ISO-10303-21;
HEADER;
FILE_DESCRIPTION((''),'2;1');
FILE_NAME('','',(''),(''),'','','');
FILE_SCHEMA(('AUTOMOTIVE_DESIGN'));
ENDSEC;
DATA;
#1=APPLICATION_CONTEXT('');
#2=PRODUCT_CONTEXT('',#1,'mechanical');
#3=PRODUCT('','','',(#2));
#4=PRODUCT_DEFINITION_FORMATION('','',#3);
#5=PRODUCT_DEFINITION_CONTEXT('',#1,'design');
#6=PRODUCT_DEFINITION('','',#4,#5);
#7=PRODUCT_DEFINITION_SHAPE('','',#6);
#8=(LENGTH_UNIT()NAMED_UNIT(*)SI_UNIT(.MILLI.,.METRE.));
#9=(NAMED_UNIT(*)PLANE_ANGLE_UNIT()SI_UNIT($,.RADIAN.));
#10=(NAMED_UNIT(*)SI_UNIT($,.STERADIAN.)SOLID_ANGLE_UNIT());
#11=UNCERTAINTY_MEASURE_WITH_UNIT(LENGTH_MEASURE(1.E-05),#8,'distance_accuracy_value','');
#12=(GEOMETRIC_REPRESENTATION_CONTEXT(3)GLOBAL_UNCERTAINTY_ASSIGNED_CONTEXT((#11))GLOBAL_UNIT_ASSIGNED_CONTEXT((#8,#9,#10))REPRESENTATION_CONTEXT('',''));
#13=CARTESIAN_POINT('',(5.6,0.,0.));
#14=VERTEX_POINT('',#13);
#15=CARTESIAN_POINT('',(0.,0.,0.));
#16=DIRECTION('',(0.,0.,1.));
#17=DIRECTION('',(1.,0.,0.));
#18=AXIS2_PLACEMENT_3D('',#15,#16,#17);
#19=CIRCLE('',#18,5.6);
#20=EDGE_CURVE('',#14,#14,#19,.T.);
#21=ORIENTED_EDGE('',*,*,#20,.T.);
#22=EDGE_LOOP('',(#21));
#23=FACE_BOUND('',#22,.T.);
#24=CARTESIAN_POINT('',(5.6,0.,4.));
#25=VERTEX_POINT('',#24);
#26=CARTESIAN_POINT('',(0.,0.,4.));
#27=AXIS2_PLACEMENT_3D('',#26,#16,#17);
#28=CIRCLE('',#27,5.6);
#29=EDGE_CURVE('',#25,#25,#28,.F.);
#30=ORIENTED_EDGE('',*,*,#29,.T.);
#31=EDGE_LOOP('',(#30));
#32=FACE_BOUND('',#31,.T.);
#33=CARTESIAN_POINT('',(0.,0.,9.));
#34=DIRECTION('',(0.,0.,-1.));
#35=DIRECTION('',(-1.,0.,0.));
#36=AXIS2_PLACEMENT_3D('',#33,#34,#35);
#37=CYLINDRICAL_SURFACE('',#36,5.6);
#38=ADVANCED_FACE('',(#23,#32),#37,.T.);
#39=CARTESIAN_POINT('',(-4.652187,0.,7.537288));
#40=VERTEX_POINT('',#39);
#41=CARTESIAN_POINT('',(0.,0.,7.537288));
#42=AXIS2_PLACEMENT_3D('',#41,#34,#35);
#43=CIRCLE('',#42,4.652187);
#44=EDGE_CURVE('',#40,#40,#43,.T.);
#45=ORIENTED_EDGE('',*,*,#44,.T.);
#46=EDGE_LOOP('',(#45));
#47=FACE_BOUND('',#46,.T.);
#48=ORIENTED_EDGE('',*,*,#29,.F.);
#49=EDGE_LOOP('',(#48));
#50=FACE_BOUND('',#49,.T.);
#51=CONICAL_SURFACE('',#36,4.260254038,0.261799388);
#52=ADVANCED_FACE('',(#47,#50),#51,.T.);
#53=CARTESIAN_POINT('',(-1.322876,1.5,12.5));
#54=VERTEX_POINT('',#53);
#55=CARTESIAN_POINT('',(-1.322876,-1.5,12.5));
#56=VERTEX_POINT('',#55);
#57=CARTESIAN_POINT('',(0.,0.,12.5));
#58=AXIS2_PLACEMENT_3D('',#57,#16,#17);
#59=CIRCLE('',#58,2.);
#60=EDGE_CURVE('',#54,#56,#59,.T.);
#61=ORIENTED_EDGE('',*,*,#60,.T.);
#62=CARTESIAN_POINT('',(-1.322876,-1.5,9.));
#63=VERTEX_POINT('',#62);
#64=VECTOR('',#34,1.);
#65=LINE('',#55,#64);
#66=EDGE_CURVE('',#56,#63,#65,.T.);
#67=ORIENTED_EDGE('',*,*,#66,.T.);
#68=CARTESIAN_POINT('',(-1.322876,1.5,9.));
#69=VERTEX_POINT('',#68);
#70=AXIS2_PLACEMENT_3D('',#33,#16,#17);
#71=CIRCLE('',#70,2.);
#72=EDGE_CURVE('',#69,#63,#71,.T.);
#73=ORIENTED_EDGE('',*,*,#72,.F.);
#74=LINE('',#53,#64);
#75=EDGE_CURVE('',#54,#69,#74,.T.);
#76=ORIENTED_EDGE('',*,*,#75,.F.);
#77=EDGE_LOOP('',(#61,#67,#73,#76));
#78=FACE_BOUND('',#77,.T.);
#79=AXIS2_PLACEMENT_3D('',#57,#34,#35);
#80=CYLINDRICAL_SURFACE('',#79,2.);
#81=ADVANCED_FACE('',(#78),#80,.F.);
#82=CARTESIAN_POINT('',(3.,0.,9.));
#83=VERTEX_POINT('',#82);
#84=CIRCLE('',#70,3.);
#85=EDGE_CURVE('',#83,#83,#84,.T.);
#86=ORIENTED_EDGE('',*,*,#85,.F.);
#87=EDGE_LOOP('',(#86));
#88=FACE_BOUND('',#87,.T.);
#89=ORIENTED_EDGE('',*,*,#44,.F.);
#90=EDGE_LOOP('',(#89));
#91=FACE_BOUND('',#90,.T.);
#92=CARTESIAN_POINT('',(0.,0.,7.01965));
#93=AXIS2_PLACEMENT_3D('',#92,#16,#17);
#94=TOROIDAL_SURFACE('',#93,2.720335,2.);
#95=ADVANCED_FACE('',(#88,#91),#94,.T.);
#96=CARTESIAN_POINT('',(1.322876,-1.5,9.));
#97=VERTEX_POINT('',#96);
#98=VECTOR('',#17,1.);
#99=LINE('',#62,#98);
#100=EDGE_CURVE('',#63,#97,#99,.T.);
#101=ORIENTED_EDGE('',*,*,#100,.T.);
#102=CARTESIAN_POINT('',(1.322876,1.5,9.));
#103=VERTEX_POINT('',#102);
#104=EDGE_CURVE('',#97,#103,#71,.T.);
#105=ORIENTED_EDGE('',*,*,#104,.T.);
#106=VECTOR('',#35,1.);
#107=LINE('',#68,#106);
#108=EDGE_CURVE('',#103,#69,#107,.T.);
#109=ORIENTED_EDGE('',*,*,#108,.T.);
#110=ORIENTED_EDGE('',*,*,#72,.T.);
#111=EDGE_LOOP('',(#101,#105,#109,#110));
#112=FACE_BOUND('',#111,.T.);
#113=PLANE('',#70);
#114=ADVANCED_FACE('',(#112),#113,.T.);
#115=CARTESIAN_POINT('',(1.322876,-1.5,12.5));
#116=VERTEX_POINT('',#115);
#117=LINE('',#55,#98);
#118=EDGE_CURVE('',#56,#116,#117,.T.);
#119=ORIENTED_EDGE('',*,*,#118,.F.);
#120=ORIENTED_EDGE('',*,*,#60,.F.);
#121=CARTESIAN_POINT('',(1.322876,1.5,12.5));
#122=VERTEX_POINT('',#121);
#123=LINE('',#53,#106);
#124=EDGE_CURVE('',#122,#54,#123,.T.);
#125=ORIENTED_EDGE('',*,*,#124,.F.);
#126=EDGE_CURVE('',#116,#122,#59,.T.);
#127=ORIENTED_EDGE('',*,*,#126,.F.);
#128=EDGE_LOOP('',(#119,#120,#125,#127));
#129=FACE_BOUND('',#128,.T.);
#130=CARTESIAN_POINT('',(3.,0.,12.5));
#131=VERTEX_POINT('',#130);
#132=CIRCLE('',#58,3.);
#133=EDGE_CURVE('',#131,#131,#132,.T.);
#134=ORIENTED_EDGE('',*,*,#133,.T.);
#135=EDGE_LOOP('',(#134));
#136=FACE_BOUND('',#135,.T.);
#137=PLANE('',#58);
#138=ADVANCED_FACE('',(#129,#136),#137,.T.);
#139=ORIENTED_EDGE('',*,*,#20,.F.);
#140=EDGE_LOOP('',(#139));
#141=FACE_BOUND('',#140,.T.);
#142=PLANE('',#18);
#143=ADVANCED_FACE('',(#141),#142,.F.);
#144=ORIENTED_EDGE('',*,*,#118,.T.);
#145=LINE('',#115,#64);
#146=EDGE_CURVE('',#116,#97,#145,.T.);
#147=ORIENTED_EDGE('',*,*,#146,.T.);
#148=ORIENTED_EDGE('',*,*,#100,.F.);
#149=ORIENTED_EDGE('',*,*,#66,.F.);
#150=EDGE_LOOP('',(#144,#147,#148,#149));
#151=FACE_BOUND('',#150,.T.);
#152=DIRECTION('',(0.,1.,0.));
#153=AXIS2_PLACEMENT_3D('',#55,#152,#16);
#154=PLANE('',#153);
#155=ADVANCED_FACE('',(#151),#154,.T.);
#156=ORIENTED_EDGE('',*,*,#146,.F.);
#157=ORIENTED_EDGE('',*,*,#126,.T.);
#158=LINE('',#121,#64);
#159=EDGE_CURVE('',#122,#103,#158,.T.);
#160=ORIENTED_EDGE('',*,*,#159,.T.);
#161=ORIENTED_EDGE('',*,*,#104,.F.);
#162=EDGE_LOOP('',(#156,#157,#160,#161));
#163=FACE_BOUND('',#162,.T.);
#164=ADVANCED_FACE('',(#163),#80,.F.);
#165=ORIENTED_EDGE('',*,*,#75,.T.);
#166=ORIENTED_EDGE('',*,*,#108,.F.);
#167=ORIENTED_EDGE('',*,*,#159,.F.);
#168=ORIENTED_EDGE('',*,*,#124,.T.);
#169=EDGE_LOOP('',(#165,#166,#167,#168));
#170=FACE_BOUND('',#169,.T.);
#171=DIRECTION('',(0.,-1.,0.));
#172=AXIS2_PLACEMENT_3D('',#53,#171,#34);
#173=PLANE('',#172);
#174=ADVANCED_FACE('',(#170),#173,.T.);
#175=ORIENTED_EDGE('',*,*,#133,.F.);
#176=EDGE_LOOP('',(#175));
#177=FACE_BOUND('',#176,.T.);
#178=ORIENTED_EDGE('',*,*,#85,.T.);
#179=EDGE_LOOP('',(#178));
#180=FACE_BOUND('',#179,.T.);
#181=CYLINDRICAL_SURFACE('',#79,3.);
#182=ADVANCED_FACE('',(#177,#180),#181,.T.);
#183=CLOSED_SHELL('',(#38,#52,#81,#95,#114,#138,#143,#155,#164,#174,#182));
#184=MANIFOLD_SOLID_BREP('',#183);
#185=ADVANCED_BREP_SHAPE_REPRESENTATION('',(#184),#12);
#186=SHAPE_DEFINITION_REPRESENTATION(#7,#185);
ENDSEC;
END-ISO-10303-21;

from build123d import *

# Parameters (mm, degrees)
SKETCH1_R           = 5.6
BOSS_EXTRUDE1_DEPTH = 9
SKETCH2_R           = 3
BOSS_EXTRUDE2_DEPTH = 3.5
CHAMFER1_SIZE       = 5
CHAMFER1_SIZE2      = 1.339745962


with BuildPart() as part:
    # Sketch1 → Boss-Extrude1 (new body)
    with BuildSketch(Plane.XY):
        Circle(SKETCH1_R)
    extrude(amount=BOSS_EXTRUDE1_DEPTH)

    # Sketch2 → Boss-Extrude2 (add)
    with BuildSketch(Plane.XY.offset(9)):
        Circle(SKETCH2_R)
        with BuildLine():
            Line((-1.322875656, -1.5), (1.322875656, -1.5))
            ThreePointArc((1.322875656, -1.5), (2, 0), (1.322875656, 1.5))
            Line((1.322875656, 1.5), (-1.322875656, 1.5))
            ThreePointArc((-1.322875656, 1.5), (-2, 0), (-1.322875656, -1.5))
        make_face(mode=Mode.SUBTRACT)
    extrude(amount=BOSS_EXTRUDE2_DEPTH)

    # Chamfer1
    chamfer1_edges = [part.edges().sort_by_distance(p)[0] for p in [
        (-5.6, 0, 9),
    ]]
    chamfer1_side = [part.faces().sort_by_distance(p)[0] for p in [
        (-5.6, 0, 4.5),
    ]]
    chamfer(chamfer1_edges, length=CHAMFER1_SIZE, length2=CHAMFER1_SIZE2, reference=chamfer1_side[0])

    # Fillet1: read off the stored shape, not the designer's step
    # Fillet1 outline → Fillet1 (revolve, cut)
    with BuildSketch(Plane.XZ):
        with BuildLine():
            Line((4.652186603, 7.537287752), (4.652186603, 9))
            Line((4.652186603, 9), (3, 9))
            ThreePointArc((3, 9), (4.04607373, 8.517119759), (4.652186603, 7.537287752))
        make_face()
    revolve(axis=Axis((0, 0, 0), (0, 0, 1)), mode=Mode.SUBTRACT)


solid = part.part
